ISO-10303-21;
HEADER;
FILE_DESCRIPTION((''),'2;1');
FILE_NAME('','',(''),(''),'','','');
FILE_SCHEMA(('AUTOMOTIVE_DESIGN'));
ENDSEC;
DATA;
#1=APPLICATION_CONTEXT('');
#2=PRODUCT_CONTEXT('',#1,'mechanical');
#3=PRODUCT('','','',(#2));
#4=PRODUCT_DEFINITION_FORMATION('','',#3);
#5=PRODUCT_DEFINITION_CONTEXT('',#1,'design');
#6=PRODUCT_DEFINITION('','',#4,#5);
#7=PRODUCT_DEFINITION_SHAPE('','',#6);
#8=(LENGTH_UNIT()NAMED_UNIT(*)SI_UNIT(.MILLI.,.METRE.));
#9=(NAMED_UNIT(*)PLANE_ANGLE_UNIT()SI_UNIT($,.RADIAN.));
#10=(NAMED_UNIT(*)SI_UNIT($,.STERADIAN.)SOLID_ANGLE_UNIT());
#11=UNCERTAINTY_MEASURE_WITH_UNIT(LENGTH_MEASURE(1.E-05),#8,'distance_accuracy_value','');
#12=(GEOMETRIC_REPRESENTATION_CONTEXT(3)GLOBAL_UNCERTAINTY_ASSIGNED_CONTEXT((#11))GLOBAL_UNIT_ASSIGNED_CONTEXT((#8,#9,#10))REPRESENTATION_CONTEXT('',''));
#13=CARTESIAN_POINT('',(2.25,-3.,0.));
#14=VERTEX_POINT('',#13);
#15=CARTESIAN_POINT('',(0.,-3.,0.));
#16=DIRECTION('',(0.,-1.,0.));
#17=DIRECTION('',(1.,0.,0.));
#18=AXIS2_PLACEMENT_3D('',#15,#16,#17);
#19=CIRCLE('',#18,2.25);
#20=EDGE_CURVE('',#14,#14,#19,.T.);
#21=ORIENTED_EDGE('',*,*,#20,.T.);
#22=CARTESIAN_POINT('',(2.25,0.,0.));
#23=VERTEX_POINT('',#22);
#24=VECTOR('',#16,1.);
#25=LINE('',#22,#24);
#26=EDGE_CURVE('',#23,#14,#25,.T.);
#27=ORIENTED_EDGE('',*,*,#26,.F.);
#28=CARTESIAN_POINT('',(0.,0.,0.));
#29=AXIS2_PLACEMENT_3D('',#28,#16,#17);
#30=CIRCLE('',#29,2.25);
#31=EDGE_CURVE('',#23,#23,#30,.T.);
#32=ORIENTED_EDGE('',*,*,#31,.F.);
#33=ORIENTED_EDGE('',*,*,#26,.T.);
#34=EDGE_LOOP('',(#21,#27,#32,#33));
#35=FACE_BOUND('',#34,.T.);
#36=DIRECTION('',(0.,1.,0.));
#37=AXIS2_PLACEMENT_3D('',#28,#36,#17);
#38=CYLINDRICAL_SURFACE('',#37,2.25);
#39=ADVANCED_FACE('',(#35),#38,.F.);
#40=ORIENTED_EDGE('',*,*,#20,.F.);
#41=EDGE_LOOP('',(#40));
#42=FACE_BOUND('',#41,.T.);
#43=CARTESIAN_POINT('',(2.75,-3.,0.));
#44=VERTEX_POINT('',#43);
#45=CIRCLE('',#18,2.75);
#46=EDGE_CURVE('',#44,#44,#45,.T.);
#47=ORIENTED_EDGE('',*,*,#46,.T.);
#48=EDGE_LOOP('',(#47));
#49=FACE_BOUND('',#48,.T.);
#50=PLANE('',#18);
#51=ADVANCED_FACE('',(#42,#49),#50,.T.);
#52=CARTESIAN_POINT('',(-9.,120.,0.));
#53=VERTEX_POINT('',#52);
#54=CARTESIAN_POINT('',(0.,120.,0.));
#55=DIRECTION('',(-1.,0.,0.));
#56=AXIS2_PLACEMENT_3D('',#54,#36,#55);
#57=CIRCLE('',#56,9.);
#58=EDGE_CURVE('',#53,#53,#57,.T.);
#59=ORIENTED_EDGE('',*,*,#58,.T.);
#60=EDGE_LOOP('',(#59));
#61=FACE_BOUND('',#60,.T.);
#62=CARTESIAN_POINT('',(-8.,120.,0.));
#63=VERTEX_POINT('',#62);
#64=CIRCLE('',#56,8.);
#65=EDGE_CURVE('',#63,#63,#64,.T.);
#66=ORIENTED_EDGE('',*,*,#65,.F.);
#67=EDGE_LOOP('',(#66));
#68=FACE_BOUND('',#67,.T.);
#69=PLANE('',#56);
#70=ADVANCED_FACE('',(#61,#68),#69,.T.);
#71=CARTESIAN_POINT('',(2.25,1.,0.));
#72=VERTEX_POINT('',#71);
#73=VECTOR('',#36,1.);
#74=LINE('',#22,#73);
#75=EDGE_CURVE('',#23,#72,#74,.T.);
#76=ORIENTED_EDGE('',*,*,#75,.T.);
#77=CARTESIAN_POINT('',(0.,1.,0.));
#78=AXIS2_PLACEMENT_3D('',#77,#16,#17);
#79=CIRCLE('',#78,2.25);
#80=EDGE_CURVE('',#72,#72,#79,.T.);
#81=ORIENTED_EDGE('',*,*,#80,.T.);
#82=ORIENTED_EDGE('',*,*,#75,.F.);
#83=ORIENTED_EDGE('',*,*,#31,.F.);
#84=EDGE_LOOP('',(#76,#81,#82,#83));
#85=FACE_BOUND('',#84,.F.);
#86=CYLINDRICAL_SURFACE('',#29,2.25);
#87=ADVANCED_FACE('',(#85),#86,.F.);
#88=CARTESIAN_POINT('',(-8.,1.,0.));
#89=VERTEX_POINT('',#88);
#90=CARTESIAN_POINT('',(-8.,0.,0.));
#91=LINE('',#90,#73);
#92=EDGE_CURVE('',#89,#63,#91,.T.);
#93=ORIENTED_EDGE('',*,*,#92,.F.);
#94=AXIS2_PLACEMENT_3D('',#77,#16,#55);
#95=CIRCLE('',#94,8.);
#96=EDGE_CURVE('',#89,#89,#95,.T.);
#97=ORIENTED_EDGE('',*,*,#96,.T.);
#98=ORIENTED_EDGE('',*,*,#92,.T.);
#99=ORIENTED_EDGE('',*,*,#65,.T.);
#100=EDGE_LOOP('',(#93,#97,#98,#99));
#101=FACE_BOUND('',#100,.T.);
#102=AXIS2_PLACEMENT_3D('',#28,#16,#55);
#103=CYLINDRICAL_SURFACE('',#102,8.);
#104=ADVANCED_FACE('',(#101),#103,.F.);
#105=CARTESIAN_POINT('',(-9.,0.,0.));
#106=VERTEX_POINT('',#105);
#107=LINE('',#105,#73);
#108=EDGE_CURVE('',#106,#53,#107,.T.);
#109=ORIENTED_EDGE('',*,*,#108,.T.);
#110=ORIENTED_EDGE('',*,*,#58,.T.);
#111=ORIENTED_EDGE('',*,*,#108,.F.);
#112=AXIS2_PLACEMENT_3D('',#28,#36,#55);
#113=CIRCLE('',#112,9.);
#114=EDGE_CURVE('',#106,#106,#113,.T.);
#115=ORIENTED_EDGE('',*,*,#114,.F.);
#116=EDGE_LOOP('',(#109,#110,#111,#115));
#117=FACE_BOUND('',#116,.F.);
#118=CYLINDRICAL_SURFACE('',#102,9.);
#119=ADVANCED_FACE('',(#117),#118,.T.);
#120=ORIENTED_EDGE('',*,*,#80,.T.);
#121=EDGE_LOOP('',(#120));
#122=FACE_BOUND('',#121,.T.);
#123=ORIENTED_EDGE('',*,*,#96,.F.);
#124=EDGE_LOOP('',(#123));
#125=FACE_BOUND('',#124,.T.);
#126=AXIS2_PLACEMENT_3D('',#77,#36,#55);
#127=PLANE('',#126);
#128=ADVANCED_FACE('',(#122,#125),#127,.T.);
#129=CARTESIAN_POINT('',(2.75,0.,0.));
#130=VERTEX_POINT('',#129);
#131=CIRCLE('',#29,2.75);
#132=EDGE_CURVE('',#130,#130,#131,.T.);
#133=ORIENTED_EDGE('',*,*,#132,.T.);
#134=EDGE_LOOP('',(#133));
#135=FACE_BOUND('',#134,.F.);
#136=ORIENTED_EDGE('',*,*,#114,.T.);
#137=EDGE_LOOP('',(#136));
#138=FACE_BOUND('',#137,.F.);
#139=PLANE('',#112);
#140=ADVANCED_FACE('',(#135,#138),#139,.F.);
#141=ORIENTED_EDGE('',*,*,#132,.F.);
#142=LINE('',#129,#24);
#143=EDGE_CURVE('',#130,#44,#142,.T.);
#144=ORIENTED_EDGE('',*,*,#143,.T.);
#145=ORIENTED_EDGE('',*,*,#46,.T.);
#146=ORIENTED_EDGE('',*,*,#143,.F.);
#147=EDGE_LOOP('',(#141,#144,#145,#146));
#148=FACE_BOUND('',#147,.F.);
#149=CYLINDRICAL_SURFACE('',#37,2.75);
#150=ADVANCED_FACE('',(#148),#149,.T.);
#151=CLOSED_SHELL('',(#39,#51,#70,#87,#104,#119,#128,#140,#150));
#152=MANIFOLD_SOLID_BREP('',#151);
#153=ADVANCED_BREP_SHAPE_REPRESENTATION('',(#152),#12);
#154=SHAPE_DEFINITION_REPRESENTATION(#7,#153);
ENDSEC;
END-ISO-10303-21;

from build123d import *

# Parameters (mm, degrees)
F0_R     = 2.75
F0_R_2   = 2.25
F1_DEPTH = 3
F2_R     = 9
F3_DEPTH = 120
F4_T     = 1
F5_DEPTH = 25


# Not quite as in the source:
# - a shell that OpenCascade refuses in one call is made with other operations: the cavity is built on its own and cut out


with BuildPart() as f1:
    # F0 (on Front) → F1 (new body)
    with BuildSketch(Plane.XZ):
        Circle(F0_R)
        Circle(F0_R_2, mode=Mode.SUBTRACT)
    extrude(amount=F1_DEPTH)

    # F2 (on face) → F3 (join)
    with BuildSketch(Plane(origin=(0, 0, 0), x_dir=(-1, 0, 0), z_dir=(0, 1, 0))):
        Circle(F2_R)
    extrude(amount=F3_DEPTH)

    # F4: shell of thickness 1, made by hand


with BuildPart() as f4_core1:
    # F4_t2: copy of F1
    add(f1.part)

    # the walls: a layer under each face that stays
    f4_faces = [f4_core1.faces().sort_by_distance(p)[0] for p in [
        (9, 60, 0),
        (6, 0, -6),
        (-2.75, -1.5, 0),
        (-1.8333333333, -3, -1.8333333333),
        (-2.25, -1.5, 0),
        (0, 0, 0),
    ]]
    thicken(f4_faces, amount=-F4_T, mode=Mode.SUBTRACT)

    # F4_s3 → F4_t4 (revolve, cut)
    with BuildSketch(Plane.XY):
        Polygon((2.76, -0.01), (2.75, 1), (1.75, 1), (1.75, 0), align=None)
    revolve(axis=Axis((0, 0, 0), (0, -1, 0)), mode=Mode.SUBTRACT)

    # F4_s5 → F4_t6 (revolve, cut)
    with BuildSketch(Plane.XY):
        Polygon((2.24, -0.01), (3.25, 0), (3.25, 1), (2.25, 1), align=None)
    revolve(axis=Axis((0, 0, 0), (0, -1, 0)), mode=Mode.SUBTRACT)


with BuildPart() as f1_1:
    add(f1.part)

    # what is left inside the walls is the cavity
    f4_cavity = [f4_core1.part.solids().sort_by_distance(p)[0] for p in [
        (7.99, 80.333333, 0),
    ]]
    add(f4_cavity, mode=Mode.SUBTRACT)

    # F0 (on Front) → F5 (cut)
    with BuildSketch(Plane.XZ):
        Circle(F0_R_2)
    extrude(amount=-F5_DEPTH, mode=Mode.SUBTRACT)


solid = f1_1.part
